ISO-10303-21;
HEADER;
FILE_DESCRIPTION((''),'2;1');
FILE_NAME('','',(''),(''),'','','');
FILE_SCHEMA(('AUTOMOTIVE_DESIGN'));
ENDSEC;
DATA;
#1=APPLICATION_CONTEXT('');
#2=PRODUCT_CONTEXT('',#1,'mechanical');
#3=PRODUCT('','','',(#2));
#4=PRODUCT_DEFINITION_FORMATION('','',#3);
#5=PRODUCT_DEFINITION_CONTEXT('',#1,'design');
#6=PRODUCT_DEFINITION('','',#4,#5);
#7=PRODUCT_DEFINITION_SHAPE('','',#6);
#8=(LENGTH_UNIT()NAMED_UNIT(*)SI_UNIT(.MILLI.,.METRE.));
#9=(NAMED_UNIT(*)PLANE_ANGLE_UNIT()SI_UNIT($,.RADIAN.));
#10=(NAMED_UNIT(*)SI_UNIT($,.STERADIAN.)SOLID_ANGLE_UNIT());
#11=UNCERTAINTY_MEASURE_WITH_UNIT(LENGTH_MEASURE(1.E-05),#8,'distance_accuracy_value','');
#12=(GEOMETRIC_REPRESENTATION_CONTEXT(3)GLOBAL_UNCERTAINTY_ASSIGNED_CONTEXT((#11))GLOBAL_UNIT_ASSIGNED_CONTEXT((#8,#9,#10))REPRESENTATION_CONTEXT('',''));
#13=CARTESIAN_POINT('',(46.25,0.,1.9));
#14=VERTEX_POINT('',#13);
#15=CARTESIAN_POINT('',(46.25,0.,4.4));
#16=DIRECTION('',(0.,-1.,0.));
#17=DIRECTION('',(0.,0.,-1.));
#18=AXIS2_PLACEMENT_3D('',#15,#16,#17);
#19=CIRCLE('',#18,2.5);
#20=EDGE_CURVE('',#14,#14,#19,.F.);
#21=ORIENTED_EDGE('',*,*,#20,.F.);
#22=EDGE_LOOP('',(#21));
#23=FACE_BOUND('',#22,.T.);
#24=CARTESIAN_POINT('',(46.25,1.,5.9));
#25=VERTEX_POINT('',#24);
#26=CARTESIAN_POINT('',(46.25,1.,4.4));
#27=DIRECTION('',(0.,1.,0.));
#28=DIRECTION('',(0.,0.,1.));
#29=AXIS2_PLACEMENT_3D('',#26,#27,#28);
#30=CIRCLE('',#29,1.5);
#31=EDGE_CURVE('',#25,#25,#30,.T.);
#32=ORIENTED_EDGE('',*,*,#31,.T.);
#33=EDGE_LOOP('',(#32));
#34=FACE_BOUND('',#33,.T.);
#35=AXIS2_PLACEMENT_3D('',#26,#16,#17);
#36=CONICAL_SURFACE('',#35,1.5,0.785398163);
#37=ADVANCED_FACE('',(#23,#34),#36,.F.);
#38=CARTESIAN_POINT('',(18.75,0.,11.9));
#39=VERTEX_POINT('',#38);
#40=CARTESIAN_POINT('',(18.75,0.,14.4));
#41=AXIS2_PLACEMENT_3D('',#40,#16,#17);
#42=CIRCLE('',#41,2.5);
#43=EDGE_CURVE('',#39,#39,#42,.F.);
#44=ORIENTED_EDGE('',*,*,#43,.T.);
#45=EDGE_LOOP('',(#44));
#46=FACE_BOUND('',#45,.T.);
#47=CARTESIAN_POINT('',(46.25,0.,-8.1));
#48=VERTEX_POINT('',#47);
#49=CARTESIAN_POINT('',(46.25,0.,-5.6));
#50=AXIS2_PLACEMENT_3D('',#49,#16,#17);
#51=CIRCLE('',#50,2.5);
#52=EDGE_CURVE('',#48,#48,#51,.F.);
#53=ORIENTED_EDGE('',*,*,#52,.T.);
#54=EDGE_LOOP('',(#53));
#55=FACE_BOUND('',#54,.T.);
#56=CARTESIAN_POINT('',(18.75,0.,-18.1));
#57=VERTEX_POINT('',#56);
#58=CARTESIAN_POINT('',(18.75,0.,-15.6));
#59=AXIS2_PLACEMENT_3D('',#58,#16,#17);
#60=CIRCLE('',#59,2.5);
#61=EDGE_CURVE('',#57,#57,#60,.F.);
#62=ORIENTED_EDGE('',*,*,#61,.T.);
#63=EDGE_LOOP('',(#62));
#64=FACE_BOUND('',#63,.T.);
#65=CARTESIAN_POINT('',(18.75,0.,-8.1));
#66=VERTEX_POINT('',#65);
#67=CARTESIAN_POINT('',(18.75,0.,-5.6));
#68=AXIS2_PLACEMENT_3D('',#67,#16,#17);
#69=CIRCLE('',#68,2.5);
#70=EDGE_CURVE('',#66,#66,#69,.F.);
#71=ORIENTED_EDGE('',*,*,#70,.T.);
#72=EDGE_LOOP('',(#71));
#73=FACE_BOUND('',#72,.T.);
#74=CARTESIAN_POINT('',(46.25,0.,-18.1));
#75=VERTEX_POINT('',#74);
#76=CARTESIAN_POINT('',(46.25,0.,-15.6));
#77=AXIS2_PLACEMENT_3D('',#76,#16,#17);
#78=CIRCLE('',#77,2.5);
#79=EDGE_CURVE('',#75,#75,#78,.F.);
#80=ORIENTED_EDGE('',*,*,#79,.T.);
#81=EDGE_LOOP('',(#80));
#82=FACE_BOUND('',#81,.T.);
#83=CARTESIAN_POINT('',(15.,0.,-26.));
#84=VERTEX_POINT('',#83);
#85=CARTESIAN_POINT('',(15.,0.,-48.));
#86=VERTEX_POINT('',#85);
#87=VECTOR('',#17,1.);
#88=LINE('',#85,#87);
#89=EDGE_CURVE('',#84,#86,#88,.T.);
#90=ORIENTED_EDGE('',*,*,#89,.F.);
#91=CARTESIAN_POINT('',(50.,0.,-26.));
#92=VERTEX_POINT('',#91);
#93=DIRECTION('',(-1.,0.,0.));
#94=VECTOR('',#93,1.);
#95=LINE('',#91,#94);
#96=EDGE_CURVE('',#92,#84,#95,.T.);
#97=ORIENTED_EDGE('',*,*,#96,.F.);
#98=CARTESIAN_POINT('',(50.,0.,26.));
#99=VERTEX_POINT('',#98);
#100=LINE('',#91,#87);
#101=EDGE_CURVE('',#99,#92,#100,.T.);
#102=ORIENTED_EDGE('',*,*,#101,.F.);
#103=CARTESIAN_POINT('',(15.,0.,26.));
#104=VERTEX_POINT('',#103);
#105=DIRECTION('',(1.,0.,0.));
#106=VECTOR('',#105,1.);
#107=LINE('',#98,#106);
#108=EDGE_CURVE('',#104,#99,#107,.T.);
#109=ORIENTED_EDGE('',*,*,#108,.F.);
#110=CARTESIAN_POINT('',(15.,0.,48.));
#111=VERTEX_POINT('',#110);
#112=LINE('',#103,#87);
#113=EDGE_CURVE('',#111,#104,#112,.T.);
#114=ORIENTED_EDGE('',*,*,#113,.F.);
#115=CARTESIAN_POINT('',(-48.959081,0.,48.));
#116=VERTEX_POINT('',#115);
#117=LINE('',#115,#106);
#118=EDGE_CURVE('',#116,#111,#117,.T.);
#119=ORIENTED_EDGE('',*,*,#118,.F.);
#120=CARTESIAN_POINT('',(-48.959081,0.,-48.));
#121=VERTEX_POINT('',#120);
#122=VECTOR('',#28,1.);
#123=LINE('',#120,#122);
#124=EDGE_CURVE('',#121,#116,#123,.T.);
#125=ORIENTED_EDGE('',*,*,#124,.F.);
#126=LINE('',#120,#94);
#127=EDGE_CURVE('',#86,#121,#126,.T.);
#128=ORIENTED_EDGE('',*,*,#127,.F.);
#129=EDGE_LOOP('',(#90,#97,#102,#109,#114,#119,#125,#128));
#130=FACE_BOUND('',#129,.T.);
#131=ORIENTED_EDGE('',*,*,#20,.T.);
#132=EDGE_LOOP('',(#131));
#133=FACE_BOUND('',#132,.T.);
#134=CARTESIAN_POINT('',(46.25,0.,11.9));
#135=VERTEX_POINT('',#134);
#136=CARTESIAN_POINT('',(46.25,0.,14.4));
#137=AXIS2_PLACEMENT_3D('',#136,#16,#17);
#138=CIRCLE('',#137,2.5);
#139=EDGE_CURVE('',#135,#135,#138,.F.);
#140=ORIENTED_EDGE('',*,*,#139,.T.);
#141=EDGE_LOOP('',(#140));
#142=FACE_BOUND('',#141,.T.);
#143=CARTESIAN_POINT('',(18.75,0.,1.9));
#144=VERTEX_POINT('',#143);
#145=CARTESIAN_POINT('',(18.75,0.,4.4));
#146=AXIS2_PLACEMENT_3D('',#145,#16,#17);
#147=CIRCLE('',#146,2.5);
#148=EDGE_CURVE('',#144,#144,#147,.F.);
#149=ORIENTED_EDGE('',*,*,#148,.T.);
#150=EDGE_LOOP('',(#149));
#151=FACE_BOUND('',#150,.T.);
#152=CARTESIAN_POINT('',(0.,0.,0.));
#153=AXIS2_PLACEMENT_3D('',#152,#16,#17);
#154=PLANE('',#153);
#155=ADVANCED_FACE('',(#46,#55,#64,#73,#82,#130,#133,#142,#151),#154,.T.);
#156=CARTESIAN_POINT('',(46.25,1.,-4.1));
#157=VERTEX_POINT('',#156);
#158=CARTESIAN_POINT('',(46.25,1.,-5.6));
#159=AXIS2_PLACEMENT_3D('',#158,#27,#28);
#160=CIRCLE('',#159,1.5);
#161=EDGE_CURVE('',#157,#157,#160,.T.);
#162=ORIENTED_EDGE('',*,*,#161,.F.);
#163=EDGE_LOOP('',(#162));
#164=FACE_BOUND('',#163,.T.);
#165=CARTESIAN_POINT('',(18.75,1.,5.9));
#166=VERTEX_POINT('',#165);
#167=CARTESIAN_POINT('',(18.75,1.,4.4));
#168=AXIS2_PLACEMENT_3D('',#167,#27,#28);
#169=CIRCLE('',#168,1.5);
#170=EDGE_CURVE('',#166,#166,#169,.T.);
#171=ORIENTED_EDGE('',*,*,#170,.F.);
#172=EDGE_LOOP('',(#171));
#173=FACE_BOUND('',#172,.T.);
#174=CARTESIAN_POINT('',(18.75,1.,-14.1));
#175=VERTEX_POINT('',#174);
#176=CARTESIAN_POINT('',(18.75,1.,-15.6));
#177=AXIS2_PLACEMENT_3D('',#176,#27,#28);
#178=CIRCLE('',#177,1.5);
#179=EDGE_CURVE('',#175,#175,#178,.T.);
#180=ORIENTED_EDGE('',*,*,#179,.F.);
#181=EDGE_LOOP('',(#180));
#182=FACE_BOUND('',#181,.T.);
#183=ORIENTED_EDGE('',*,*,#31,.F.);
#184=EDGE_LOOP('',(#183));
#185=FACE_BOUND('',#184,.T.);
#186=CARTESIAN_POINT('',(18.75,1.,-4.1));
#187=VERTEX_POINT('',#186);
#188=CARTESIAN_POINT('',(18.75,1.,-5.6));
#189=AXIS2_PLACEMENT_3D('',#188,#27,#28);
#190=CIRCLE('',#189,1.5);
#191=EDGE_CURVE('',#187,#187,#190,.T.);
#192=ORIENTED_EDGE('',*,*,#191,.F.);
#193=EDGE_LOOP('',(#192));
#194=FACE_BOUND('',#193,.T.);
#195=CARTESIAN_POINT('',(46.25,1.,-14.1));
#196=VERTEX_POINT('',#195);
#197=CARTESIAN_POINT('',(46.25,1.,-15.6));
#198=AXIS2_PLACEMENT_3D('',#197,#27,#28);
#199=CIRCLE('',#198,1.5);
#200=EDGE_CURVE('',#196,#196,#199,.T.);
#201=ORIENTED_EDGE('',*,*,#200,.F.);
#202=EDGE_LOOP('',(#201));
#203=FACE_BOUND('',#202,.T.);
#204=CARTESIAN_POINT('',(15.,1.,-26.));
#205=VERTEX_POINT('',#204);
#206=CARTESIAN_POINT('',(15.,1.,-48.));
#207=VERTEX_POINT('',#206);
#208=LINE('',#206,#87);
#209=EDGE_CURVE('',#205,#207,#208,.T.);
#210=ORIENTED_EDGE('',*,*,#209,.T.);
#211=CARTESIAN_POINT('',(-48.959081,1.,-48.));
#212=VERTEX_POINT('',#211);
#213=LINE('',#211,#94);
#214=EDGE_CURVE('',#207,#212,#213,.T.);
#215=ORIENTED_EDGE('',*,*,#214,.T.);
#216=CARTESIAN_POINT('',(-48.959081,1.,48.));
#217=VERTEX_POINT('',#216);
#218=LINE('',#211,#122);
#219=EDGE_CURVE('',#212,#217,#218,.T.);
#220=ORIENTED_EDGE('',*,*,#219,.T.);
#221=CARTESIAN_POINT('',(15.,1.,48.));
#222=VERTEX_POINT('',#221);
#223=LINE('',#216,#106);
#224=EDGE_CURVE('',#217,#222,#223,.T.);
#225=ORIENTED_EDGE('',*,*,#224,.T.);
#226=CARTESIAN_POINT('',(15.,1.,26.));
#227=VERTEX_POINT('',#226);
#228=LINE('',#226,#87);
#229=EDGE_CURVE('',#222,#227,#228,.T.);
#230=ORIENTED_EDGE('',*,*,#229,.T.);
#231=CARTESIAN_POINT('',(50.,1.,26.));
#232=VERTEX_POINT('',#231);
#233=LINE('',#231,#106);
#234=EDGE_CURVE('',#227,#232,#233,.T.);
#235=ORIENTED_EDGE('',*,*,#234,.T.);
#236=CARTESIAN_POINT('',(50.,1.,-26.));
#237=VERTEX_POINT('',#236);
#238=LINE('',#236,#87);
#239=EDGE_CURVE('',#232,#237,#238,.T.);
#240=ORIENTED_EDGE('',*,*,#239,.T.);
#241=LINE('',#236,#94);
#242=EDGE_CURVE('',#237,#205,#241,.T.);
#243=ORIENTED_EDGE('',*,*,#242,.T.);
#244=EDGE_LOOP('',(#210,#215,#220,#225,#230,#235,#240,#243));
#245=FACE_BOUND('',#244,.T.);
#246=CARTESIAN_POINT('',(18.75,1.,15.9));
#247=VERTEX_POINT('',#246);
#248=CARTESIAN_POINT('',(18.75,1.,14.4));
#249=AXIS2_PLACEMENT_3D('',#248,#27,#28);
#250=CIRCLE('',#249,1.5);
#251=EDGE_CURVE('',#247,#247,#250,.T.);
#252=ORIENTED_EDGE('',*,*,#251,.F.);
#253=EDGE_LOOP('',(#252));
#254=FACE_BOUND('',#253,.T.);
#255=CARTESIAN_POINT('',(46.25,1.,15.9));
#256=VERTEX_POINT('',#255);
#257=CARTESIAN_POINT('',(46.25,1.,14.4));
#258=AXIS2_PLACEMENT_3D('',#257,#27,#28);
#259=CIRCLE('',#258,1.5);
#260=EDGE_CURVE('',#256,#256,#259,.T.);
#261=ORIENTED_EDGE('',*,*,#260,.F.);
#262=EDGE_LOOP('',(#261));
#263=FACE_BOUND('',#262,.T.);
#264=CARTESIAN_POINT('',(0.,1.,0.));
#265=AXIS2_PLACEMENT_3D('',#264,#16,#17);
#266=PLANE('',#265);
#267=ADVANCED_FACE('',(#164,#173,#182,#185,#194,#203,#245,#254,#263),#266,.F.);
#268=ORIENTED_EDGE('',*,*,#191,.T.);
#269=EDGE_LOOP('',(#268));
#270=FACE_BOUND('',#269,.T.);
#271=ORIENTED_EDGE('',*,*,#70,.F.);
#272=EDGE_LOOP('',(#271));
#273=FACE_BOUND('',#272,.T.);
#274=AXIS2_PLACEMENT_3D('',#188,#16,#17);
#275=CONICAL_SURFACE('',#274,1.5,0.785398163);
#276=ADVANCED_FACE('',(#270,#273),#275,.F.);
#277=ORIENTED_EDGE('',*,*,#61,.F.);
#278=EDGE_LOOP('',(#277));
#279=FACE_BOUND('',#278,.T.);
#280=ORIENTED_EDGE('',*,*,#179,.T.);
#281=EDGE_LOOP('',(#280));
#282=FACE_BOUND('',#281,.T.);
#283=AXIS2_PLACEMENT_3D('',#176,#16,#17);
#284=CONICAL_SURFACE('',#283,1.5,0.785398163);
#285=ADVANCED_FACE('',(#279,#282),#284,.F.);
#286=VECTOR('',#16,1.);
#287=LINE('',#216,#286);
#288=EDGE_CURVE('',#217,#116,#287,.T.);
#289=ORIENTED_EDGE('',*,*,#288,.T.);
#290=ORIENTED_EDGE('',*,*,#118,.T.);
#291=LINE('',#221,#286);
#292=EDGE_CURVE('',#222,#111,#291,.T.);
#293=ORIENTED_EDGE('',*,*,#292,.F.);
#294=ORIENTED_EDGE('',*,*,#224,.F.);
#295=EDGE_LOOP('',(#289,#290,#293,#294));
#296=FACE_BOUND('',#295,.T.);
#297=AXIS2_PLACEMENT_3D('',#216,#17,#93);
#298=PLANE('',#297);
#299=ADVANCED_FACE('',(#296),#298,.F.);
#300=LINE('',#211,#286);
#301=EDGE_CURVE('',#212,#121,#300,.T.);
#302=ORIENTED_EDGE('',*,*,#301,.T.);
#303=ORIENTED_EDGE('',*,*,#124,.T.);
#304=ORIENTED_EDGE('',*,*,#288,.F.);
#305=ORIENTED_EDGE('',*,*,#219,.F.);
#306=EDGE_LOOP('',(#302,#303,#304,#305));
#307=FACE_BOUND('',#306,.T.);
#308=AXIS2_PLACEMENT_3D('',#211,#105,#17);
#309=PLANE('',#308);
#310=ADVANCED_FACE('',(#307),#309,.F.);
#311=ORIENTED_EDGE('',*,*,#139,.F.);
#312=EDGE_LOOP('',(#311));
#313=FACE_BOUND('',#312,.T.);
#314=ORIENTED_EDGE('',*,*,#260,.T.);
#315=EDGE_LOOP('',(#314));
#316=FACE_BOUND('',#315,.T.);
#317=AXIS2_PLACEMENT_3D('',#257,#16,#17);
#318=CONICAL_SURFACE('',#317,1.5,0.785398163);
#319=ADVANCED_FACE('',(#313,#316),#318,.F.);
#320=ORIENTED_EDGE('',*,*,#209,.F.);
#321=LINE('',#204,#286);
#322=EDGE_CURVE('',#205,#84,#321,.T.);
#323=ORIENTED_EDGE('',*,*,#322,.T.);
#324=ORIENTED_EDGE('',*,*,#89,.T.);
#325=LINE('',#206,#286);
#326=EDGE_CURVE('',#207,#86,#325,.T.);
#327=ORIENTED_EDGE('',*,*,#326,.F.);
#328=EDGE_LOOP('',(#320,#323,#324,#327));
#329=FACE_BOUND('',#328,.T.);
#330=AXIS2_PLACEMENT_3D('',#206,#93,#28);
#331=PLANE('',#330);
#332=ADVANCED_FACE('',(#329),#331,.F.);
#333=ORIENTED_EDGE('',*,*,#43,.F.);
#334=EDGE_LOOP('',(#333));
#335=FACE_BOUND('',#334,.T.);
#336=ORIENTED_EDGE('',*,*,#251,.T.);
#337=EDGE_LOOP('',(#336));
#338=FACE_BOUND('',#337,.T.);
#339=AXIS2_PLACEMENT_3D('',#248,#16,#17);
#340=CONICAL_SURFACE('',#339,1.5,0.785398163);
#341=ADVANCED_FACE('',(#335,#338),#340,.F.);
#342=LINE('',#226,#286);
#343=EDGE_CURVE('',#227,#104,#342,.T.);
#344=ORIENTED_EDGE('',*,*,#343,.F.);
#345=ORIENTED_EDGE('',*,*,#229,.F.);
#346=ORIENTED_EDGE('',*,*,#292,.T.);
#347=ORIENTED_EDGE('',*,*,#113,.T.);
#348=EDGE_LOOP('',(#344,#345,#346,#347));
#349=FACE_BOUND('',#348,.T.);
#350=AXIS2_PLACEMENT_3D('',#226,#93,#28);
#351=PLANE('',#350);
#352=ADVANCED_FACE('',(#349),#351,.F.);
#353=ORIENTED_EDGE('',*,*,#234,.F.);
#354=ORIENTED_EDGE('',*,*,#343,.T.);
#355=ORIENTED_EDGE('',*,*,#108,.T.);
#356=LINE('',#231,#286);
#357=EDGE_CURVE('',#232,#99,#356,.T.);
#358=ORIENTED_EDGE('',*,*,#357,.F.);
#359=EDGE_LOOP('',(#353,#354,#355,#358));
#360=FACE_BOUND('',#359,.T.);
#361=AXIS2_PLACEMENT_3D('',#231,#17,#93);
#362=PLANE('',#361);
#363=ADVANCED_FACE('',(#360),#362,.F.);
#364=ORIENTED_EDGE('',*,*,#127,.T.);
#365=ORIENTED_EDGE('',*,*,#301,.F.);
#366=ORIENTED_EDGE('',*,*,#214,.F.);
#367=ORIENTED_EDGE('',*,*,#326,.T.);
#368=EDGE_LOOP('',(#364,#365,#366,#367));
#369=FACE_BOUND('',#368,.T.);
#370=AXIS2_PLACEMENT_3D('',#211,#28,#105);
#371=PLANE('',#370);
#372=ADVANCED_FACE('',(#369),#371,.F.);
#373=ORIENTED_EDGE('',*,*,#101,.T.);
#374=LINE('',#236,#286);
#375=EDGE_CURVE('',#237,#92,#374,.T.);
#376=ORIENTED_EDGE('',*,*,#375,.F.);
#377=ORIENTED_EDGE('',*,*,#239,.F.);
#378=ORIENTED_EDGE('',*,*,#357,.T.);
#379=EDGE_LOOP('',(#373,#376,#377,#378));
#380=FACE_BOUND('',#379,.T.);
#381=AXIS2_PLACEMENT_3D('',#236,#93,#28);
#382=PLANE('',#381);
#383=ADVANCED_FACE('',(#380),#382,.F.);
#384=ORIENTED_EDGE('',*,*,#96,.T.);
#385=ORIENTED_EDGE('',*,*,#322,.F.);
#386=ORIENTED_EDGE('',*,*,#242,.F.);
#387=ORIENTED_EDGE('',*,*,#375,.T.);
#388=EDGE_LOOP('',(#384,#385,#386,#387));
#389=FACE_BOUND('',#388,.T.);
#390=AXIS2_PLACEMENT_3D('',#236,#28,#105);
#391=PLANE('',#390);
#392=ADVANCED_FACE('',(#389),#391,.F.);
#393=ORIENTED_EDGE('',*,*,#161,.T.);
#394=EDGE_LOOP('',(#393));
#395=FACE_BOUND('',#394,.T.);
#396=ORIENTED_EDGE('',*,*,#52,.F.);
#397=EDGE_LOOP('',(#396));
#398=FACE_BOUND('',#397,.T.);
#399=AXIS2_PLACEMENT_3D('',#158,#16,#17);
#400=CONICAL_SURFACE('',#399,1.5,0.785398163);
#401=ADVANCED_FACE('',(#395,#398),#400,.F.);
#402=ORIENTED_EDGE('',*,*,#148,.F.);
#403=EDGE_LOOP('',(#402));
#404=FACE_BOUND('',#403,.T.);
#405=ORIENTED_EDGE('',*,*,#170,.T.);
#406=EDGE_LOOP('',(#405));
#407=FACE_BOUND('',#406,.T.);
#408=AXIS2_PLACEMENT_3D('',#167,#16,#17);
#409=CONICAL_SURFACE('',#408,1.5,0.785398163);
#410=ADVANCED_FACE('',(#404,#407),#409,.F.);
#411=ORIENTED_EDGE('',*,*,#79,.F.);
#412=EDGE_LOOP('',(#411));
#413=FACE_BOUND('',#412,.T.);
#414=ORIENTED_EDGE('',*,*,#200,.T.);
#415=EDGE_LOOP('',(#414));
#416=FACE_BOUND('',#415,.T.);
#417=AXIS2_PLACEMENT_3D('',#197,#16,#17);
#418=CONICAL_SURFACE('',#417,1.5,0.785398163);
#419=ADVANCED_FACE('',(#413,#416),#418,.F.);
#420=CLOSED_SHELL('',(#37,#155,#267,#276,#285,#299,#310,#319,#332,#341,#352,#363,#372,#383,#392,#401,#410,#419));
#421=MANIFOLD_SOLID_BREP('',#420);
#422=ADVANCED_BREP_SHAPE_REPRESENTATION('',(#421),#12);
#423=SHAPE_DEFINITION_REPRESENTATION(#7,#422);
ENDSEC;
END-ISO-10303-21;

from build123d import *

# Parameters (mm, degrees)
EXTRUDE_1_DEPTH     = 1
SKETCH_2_R          = 1.5
CUT_EXTRUDE_1_DEPTH = 10
CHAMFER_1_SIZE      = 1


with BuildPart() as part:
    # Эскиз1 → Бобышка-Вытянуть1 (new body)
    with BuildSketch(Plane(origin=(0, 0, 0), x_dir=(1, 0, 0), z_dir=(0, 1, 0))):
        Polygon((15, -26), (15, -48), (-48.959081244, -48), (-48.959081244, 48), (15, 48), (15, 26), (50, 26), (50, -26), align=None)
    extrude(amount=EXTRUDE_1_DEPTH)

    # Эскиз2 → Вырез-Вытянуть1 (cut)
    with BuildSketch(Plane(origin=(0, 1, 0), x_dir=(1, 0, 0), z_dir=(0, 1, 0))):
        with Locations(Location((46.25, -14.4, 0), (0, 0, 270))):
            Circle(SKETCH_2_R)
        with Locations(Location((18.75, -14.4, 0), (0, 0, 270))):
            Circle(SKETCH_2_R)
        with Locations(Location((18.75, -4.4, 0), (0, 0, 270))):
            Circle(SKETCH_2_R)
        with Locations(Location((46.25, -4.4, 0), (0, 0, 270))):
            Circle(SKETCH_2_R)
        with Locations(Location((18.75, 5.6, 0), (0, 0, 270))):
            Circle(SKETCH_2_R)
        with Locations(Location((46.25, 5.6, 0), (0, 0, 270))):
            Circle(SKETCH_2_R)
        with Locations(Location((18.75, 15.6, 0), (0, 0, 270))):
            Circle(SKETCH_2_R)
        with Locations(Location((46.25, 15.6, 0), (0, 0, 270))):
            Circle(SKETCH_2_R)
    extrude(amount=-CUT_EXTRUDE_1_DEPTH, mode=Mode.SUBTRACT)

    # Фаска1
    chamfer_1_edges = [part.edges().sort_by_distance(p)[0] for p in [
        (46.25, 0, -7.1),
        (18.75, 0, 2.9),
        (46.25, 0, 2.9),
        (18.75, 0, 12.9),
        (18.75, 0, -17.1),
        (46.25, 0, -17.1),
        (18.75, 0, -7.1),
        (46.25, 0, 12.9),
    ]]
    chamfer(chamfer_1_edges, length=CHAMFER_1_SIZE - 0.0001)  # a hair under: the kernel refuses the full size


solid = part.part
